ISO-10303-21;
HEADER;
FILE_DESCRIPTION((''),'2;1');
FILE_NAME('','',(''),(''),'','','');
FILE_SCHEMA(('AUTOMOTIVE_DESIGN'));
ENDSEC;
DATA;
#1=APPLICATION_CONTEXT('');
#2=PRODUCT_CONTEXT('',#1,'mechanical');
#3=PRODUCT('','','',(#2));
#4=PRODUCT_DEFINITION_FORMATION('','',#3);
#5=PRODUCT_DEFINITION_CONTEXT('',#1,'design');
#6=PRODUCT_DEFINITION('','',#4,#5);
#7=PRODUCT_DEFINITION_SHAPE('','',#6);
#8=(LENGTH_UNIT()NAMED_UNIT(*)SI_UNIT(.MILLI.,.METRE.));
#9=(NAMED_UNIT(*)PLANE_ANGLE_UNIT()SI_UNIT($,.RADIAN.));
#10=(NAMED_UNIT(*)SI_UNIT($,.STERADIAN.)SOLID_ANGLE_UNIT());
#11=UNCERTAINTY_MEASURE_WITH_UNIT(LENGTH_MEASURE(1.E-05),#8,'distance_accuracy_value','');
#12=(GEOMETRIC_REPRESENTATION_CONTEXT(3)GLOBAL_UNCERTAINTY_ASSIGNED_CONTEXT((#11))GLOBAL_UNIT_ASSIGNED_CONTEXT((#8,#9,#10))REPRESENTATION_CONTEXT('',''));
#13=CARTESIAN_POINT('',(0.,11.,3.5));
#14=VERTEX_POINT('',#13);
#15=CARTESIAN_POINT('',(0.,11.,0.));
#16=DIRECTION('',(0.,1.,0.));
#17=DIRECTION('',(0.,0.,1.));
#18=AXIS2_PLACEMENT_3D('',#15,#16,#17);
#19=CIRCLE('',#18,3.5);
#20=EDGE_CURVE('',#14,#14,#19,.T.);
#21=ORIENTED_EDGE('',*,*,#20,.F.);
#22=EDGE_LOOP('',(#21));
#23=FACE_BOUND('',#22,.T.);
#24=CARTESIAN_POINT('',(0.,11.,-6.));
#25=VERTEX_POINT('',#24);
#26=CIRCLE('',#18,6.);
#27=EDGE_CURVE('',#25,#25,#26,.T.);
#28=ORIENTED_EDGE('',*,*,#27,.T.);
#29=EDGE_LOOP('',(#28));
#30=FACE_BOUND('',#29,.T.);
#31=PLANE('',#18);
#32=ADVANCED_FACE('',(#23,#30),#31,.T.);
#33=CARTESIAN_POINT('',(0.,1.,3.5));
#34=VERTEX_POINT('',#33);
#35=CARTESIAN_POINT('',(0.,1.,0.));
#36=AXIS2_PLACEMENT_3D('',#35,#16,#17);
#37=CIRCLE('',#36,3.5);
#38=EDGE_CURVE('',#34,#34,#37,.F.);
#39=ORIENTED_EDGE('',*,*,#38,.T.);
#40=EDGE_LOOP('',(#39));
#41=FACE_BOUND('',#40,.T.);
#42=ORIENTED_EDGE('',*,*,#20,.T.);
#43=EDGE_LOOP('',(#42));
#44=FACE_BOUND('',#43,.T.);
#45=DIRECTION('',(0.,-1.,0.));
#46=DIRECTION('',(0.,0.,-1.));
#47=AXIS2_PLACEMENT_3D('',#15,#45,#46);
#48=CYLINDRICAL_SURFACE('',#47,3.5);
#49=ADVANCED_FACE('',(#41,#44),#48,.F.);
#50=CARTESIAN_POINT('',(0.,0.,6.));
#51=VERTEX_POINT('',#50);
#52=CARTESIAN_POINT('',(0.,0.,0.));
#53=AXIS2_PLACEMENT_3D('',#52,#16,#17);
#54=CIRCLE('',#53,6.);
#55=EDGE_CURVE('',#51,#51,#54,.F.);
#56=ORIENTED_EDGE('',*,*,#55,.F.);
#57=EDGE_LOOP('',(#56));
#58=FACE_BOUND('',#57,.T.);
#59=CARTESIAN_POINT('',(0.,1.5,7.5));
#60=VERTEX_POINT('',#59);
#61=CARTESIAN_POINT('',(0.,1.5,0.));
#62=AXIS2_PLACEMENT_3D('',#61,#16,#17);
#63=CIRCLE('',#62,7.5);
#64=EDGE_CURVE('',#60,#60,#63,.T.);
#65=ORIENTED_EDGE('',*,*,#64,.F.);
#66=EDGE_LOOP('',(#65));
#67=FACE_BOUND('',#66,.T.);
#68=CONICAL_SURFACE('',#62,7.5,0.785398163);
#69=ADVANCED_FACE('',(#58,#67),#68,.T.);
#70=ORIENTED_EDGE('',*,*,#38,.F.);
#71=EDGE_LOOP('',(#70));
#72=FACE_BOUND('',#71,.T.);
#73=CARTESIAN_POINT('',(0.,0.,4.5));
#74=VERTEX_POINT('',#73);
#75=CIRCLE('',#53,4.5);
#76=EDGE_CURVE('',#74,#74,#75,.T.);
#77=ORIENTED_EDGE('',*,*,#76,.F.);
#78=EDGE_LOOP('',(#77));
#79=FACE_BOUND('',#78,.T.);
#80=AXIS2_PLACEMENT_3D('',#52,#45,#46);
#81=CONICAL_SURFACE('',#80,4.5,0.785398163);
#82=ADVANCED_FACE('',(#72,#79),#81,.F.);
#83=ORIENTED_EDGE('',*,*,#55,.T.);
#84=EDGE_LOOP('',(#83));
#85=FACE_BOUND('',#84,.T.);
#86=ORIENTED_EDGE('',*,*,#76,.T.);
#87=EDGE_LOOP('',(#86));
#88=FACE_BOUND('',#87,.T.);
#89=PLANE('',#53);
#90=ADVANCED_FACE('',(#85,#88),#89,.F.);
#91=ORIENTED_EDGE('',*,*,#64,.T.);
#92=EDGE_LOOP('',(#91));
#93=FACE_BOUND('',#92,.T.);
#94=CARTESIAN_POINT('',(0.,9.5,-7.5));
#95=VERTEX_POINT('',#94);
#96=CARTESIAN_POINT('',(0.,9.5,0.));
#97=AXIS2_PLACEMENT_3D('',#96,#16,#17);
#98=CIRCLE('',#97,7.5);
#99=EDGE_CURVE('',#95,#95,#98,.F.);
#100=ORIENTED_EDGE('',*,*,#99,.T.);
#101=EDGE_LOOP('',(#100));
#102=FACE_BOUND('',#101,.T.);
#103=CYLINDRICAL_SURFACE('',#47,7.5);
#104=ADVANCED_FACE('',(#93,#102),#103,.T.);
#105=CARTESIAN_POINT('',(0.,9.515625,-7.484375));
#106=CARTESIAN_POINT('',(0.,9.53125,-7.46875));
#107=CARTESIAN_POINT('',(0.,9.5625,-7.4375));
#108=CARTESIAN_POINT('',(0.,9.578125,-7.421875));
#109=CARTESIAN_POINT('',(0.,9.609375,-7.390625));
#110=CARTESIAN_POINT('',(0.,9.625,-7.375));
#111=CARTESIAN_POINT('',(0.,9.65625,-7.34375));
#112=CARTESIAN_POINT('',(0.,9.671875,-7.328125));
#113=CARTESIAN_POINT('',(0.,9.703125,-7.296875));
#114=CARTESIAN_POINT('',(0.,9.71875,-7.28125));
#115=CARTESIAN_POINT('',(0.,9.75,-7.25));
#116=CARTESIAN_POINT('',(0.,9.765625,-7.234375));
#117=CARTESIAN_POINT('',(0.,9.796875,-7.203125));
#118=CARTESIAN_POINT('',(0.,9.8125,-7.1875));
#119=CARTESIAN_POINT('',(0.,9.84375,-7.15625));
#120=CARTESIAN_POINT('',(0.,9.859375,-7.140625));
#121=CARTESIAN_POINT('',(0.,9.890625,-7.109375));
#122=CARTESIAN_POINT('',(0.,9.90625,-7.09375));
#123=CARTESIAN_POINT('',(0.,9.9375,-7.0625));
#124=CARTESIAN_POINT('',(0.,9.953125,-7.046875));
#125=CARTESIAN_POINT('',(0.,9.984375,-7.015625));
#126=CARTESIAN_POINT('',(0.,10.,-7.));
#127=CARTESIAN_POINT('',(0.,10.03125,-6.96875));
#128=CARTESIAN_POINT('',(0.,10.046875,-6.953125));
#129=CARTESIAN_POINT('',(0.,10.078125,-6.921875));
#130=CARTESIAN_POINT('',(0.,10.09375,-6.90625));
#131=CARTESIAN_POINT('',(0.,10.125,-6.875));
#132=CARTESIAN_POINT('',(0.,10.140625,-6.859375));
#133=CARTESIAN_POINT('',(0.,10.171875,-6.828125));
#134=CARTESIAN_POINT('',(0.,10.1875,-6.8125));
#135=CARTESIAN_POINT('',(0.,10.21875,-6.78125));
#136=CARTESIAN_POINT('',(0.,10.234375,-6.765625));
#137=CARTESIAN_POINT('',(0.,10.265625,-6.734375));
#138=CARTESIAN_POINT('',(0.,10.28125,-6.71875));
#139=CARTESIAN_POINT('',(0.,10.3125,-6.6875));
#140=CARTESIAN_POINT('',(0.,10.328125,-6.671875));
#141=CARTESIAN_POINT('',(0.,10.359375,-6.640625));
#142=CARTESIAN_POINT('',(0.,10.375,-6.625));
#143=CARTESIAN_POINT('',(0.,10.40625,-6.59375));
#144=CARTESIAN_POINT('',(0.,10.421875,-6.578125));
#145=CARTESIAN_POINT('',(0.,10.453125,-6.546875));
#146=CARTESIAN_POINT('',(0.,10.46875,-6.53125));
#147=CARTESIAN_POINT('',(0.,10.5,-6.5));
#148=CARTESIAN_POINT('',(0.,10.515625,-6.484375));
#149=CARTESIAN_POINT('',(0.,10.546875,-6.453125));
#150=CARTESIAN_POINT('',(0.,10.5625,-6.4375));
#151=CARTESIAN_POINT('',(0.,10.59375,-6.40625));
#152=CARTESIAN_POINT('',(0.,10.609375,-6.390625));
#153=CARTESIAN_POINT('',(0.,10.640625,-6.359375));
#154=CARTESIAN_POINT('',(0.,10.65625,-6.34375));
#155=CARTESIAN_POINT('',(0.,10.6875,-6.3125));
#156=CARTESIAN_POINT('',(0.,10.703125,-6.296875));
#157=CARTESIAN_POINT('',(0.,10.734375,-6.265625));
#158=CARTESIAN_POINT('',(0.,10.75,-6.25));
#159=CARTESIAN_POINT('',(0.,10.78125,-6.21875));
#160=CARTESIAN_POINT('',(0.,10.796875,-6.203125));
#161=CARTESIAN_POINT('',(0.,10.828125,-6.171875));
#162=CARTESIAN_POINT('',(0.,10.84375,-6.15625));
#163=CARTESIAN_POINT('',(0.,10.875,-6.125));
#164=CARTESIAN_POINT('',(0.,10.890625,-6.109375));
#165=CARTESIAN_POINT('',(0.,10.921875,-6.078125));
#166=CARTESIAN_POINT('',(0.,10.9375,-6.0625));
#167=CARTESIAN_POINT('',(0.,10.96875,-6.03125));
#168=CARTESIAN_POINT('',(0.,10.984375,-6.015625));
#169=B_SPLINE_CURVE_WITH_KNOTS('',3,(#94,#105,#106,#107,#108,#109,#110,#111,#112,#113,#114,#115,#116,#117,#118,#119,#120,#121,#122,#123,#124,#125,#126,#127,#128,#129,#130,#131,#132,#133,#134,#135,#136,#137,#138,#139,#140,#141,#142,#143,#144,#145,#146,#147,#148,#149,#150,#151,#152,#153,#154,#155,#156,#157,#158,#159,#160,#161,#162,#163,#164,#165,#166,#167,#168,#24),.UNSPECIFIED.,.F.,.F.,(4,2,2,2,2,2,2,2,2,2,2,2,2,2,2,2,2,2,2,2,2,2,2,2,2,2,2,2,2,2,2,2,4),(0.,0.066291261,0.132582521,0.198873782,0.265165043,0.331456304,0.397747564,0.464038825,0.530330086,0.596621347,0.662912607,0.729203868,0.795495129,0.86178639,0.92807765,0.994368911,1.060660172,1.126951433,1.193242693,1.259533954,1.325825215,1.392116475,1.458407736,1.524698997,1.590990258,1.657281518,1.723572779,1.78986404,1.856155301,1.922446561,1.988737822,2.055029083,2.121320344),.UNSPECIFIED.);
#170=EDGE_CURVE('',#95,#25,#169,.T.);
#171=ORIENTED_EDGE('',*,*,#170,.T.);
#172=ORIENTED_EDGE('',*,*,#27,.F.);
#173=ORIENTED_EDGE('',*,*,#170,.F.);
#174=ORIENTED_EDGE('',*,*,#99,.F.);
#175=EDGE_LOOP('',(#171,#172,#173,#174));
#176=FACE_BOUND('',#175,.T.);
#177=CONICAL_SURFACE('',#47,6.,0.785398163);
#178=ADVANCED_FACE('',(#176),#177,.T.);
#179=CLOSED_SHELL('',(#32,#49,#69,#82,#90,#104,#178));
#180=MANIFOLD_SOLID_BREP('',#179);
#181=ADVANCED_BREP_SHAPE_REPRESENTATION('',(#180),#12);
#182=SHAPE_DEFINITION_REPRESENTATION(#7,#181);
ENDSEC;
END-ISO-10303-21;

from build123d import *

# Parameters (mm, degrees)
SKETCH1_R           = 7.5
SKETCH1_R_2         = 3.5
BOSS_EXTRUDE1_DEPTH = 11
CHAMFER1_SIZE       = 1
CHAMFER2_SIZE       = 1.5


with BuildPart() as part:
    # Sketch1 → Boss-Extrude1 (new body)
    with BuildSketch(Plane(origin=(0, 0, 0), x_dir=(1, 0, 0), z_dir=(0, 1, 0))):
        with Locations(Location((0, 0, 0), (0, 0, 270))):
            Circle(SKETCH1_R)
        with Locations(Location((0, 0, 0), (0, 0, 270))):
            Circle(SKETCH1_R_2, mode=Mode.SUBTRACT)
    extrude(amount=BOSS_EXTRUDE1_DEPTH)

    # Chamfer1
    chamfer1_edges = [part.edges().sort_by_distance(p)[0] for p in [
        (0, 0, -3.5),
    ]]
    chamfer(chamfer1_edges, length=CHAMFER1_SIZE)

    # Chamfer2
    chamfer2_edges = [part.edges().sort_by_distance(p)[0] for p in [
        (0, 0, -7.5),
        (0, 11, -7.5),
    ]]
    chamfer(chamfer2_edges, length=CHAMFER2_SIZE)


solid = part.part
